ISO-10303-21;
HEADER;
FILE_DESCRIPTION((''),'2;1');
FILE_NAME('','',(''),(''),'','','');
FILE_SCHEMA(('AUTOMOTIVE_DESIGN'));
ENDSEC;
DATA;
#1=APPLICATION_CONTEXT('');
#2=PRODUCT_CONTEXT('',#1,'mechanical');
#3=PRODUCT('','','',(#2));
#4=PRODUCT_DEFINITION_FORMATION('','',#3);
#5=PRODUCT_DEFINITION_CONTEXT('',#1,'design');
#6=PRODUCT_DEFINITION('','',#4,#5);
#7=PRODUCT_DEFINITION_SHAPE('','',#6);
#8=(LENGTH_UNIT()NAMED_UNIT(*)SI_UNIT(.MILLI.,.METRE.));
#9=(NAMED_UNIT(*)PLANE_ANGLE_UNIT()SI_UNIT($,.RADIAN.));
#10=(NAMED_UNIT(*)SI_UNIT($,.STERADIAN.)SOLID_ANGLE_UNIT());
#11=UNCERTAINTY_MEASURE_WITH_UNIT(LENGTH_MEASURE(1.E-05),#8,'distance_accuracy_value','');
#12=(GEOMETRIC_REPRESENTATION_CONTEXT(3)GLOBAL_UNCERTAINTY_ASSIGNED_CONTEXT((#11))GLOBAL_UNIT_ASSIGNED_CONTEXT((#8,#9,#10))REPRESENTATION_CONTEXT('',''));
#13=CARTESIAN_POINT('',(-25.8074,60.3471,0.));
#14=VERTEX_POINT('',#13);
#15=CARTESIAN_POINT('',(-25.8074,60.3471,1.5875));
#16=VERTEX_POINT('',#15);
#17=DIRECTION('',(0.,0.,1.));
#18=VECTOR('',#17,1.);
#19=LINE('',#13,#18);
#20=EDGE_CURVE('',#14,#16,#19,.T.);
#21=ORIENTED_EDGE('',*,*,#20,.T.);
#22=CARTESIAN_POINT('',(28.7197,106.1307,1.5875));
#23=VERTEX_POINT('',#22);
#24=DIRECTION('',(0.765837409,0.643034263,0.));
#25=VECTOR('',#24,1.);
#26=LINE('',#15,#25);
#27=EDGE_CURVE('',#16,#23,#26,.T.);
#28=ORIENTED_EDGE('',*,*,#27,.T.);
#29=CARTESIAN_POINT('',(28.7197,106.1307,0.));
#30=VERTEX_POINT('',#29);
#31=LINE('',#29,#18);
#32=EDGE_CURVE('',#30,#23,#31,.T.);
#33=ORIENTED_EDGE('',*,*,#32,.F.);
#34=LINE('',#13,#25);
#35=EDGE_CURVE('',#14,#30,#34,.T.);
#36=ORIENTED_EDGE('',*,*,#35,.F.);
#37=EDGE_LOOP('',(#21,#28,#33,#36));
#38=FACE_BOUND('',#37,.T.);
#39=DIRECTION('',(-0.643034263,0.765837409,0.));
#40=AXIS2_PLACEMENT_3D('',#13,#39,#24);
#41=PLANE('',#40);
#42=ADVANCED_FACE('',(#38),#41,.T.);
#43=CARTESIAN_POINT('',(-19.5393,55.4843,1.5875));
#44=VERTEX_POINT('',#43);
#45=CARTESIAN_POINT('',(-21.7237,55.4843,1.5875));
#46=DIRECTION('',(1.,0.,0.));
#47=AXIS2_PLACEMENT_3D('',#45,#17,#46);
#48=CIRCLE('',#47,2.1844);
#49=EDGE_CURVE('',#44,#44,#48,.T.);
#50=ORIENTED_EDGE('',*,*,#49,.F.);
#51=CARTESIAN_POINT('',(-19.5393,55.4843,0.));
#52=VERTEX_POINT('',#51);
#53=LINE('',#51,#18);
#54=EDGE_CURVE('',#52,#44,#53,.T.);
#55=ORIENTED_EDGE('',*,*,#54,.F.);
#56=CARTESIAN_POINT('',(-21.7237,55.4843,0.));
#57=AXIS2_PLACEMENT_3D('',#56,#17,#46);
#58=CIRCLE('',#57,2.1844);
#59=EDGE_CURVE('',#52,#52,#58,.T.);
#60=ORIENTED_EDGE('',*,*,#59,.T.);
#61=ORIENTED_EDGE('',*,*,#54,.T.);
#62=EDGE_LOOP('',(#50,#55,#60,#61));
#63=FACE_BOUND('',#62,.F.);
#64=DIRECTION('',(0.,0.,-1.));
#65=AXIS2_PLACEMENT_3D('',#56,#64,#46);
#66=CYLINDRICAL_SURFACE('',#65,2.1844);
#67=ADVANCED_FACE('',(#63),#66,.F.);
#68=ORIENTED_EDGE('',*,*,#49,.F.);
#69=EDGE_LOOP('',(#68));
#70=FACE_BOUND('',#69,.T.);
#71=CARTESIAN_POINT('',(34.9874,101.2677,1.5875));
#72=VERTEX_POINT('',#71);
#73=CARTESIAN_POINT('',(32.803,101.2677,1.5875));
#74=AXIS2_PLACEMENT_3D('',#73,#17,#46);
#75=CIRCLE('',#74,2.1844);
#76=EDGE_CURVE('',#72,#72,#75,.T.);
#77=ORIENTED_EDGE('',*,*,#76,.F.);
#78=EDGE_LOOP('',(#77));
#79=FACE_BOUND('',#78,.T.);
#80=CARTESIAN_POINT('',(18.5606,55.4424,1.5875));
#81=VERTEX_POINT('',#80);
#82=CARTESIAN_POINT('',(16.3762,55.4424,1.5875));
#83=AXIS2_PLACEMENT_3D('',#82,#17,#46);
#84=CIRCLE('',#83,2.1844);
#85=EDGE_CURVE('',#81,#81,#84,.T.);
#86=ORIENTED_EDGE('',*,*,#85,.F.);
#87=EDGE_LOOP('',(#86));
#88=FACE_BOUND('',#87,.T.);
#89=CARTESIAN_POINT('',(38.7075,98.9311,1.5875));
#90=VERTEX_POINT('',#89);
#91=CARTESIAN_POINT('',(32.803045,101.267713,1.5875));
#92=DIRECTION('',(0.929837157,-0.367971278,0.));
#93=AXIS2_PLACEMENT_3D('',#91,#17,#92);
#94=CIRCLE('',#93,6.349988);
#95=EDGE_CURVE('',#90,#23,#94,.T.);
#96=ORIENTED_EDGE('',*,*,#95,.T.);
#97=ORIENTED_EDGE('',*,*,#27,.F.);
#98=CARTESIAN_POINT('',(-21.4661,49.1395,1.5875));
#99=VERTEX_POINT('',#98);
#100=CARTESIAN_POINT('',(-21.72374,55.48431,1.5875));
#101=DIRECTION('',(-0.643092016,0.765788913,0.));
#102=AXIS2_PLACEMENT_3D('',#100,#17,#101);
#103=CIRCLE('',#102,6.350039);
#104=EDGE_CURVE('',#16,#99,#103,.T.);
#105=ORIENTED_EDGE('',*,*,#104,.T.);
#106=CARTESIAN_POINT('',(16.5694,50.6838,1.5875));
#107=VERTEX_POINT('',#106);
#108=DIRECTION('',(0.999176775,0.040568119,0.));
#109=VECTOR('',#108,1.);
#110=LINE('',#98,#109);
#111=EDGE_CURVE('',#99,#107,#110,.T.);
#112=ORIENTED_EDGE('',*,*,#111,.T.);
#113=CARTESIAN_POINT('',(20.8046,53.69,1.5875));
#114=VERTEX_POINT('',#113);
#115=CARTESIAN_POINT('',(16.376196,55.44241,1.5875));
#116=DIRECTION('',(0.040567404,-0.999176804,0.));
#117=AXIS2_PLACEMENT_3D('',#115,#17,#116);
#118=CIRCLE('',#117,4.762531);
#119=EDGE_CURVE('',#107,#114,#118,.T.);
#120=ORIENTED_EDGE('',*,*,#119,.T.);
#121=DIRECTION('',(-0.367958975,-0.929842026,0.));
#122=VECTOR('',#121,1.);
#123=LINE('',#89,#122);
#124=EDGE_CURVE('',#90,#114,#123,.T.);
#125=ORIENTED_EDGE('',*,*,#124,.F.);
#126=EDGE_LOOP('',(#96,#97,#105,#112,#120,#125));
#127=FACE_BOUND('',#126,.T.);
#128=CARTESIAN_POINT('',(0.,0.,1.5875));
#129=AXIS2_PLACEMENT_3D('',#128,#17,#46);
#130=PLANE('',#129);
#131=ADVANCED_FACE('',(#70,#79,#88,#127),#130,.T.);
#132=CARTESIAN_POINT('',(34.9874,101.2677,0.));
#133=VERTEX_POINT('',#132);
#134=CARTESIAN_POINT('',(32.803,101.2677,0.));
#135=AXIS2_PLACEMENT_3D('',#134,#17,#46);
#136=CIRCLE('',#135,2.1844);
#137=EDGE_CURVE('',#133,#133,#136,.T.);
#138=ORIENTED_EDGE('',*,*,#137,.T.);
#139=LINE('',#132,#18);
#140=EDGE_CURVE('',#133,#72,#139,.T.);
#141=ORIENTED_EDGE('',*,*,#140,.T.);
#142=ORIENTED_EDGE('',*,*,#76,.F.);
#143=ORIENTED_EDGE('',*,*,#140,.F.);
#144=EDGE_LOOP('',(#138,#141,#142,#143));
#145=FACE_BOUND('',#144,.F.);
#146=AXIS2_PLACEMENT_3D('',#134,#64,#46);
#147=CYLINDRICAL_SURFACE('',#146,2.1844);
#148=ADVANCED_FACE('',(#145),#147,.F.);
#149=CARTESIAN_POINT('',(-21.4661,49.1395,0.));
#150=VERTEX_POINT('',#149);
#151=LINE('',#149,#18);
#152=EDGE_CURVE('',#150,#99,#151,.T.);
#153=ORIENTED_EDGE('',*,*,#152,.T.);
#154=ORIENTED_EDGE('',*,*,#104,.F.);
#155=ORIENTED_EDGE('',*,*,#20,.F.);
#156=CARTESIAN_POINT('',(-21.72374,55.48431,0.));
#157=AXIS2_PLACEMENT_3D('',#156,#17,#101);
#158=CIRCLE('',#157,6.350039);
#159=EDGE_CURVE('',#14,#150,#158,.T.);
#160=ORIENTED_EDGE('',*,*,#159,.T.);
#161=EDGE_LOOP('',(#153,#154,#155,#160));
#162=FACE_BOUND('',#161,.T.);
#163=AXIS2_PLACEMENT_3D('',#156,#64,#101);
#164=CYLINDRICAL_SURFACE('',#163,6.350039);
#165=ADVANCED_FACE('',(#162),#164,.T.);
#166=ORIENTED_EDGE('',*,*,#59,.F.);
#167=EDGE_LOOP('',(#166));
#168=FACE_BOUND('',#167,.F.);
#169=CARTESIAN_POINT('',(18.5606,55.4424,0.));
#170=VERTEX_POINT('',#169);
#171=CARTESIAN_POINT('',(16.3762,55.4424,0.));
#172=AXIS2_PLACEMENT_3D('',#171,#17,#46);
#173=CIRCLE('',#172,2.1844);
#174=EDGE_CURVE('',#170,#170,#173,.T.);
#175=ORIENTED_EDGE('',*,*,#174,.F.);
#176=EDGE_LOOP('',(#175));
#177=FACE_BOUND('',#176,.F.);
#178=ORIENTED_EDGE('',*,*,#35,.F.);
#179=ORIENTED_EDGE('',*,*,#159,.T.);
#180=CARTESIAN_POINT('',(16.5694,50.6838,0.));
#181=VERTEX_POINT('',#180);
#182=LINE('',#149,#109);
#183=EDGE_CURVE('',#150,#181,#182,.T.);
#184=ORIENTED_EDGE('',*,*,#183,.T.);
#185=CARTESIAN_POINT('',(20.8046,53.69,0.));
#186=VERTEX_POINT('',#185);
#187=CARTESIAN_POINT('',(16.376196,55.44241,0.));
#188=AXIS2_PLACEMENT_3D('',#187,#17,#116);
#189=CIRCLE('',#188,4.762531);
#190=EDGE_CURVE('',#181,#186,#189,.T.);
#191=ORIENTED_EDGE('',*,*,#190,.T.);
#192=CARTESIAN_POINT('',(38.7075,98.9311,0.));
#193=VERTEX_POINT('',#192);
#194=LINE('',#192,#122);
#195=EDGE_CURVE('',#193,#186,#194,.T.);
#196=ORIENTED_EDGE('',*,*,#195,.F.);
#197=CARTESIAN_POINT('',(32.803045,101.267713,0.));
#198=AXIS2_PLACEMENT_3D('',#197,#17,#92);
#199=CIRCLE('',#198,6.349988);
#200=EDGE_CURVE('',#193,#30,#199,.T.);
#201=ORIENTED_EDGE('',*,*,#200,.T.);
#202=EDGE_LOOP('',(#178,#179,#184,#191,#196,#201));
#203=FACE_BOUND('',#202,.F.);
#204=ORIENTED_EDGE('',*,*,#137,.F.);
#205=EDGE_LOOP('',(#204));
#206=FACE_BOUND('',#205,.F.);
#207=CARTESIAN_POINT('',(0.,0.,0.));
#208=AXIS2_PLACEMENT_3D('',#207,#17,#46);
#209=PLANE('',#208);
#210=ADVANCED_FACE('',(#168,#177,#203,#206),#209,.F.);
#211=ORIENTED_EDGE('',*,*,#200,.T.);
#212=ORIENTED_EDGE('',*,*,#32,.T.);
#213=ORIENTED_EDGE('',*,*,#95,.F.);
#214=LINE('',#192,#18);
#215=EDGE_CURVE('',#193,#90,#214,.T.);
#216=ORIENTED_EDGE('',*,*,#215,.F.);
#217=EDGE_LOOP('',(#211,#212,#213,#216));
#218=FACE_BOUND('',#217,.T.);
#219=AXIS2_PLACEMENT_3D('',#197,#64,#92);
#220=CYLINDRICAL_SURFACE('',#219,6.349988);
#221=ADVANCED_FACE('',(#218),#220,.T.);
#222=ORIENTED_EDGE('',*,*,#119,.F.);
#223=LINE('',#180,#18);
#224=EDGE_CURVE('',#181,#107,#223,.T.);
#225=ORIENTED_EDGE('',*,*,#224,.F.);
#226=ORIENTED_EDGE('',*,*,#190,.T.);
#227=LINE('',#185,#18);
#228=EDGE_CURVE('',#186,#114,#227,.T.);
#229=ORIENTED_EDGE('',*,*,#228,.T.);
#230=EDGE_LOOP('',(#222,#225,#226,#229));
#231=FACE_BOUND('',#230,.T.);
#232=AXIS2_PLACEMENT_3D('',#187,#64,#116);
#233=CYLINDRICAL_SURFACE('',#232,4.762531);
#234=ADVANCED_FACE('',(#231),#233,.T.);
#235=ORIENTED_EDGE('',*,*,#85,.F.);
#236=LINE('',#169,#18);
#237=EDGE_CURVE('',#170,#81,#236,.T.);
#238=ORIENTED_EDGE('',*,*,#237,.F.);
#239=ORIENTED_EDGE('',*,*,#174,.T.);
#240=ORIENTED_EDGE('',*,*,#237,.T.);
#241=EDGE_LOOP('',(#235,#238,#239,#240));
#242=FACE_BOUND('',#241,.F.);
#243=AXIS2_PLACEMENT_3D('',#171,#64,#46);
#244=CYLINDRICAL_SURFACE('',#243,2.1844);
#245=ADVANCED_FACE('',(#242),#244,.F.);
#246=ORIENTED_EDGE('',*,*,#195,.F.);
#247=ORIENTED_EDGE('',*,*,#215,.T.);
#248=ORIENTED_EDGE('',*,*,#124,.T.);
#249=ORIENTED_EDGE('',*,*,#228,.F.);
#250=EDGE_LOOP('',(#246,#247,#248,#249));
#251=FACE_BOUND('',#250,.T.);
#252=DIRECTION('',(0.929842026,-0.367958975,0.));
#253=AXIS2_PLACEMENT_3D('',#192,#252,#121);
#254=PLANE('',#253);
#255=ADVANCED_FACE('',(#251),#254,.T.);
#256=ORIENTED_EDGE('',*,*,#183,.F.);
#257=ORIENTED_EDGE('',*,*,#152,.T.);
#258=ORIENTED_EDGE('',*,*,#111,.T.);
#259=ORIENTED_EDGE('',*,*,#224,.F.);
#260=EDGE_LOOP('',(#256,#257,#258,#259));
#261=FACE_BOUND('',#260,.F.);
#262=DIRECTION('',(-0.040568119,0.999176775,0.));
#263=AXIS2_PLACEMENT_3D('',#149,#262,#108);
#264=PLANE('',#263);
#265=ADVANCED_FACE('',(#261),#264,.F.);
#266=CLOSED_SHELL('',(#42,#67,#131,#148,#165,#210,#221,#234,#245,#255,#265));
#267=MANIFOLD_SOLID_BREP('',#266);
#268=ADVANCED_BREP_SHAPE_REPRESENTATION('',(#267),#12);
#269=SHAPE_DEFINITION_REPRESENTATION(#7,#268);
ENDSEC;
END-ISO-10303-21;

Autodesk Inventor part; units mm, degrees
ref_plane "YZ Plane" through (0, 0, 0) normal (1, 0, 0) x (0, 1, 0)
ref_plane "XZ Plane" through (0, 0, 0) normal (0, 1, 0) x (-1, 0, 0)
ref_plane "XY Plane" through (0, 0, 0) normal (0, 0, 1) x (1, 0, 0)
sketch "main" plane through (0, 0, 0) normal (0, 0, 1) x (1, 0, 0)
  circle A0 centre (29.151, 60.8665) radius 2.1844
  circle A1 centre (29.151, 22.7665) radius 2.1844
  arc A2 (34.0093, 64.9555) -> (22.8065, 60.6019) centre (29.151, 60.8665) ccw
  arc A3 (24.3927, 22.568) -> (27.4035, 18.3362) centre (29.151, 22.7665) ccw
  circle A4 centre (74.9944, 6.3902) radius 2.1844
  arc A5 (72.6644, 0.4831) -> (79.8529, 10.4788) centre (74.9944, 6.3902) ccw
  line L0 (34.0093, 64.9555) -> (79.8529, 10.4788)
  line L1 (22.8065, 60.6019) -> (24.3927, 22.568)
  line L2 (72.6644, 0.4831) -> (27.4035, 18.3362)
  point P0 (-11.6855, 6.8462)
  point P1 (25.2705, 20.0056)
  dimension "d7" = 4.3688
  dimension "d8" = 12.7
  dimension "d9" = 9.525
sketch "Sketch1" plane through (0, 0, 0) normal (0, 0, 1) x (1, 0, 0)
  circle A0 centre (-21.7237, 55.4843) radius 2.1844
  circle A1 centre (16.3762, 55.4424) radius 2.1844
  arc A2 (-25.8074, 60.3471) -> (-21.4661, 49.1395) centre (-21.7237, 55.4843) ccw
  arc A3 (16.5694, 50.6838) -> (20.8046, 53.69) centre (16.3762, 55.4424) ccw
  circle A4 centre (32.803, 101.2677) radius 2.1844
  arc A5 (38.7075, 98.9311) -> (28.7197, 106.1307) centre (32.803, 101.2677) ccw
  line L0 (-25.8074, 60.3471) -> (28.7197, 106.1307)
  line L1 (-21.4661, 49.1395) -> (16.5694, 50.6838)
  line L2 (38.7075, 98.9311) -> (20.8046, 53.69)
extrude "Extrusion2" add sketch "Sketch1" along normal blind 1.5875
properties part number "half_motor_mount" material "Acetal Resin, White"
